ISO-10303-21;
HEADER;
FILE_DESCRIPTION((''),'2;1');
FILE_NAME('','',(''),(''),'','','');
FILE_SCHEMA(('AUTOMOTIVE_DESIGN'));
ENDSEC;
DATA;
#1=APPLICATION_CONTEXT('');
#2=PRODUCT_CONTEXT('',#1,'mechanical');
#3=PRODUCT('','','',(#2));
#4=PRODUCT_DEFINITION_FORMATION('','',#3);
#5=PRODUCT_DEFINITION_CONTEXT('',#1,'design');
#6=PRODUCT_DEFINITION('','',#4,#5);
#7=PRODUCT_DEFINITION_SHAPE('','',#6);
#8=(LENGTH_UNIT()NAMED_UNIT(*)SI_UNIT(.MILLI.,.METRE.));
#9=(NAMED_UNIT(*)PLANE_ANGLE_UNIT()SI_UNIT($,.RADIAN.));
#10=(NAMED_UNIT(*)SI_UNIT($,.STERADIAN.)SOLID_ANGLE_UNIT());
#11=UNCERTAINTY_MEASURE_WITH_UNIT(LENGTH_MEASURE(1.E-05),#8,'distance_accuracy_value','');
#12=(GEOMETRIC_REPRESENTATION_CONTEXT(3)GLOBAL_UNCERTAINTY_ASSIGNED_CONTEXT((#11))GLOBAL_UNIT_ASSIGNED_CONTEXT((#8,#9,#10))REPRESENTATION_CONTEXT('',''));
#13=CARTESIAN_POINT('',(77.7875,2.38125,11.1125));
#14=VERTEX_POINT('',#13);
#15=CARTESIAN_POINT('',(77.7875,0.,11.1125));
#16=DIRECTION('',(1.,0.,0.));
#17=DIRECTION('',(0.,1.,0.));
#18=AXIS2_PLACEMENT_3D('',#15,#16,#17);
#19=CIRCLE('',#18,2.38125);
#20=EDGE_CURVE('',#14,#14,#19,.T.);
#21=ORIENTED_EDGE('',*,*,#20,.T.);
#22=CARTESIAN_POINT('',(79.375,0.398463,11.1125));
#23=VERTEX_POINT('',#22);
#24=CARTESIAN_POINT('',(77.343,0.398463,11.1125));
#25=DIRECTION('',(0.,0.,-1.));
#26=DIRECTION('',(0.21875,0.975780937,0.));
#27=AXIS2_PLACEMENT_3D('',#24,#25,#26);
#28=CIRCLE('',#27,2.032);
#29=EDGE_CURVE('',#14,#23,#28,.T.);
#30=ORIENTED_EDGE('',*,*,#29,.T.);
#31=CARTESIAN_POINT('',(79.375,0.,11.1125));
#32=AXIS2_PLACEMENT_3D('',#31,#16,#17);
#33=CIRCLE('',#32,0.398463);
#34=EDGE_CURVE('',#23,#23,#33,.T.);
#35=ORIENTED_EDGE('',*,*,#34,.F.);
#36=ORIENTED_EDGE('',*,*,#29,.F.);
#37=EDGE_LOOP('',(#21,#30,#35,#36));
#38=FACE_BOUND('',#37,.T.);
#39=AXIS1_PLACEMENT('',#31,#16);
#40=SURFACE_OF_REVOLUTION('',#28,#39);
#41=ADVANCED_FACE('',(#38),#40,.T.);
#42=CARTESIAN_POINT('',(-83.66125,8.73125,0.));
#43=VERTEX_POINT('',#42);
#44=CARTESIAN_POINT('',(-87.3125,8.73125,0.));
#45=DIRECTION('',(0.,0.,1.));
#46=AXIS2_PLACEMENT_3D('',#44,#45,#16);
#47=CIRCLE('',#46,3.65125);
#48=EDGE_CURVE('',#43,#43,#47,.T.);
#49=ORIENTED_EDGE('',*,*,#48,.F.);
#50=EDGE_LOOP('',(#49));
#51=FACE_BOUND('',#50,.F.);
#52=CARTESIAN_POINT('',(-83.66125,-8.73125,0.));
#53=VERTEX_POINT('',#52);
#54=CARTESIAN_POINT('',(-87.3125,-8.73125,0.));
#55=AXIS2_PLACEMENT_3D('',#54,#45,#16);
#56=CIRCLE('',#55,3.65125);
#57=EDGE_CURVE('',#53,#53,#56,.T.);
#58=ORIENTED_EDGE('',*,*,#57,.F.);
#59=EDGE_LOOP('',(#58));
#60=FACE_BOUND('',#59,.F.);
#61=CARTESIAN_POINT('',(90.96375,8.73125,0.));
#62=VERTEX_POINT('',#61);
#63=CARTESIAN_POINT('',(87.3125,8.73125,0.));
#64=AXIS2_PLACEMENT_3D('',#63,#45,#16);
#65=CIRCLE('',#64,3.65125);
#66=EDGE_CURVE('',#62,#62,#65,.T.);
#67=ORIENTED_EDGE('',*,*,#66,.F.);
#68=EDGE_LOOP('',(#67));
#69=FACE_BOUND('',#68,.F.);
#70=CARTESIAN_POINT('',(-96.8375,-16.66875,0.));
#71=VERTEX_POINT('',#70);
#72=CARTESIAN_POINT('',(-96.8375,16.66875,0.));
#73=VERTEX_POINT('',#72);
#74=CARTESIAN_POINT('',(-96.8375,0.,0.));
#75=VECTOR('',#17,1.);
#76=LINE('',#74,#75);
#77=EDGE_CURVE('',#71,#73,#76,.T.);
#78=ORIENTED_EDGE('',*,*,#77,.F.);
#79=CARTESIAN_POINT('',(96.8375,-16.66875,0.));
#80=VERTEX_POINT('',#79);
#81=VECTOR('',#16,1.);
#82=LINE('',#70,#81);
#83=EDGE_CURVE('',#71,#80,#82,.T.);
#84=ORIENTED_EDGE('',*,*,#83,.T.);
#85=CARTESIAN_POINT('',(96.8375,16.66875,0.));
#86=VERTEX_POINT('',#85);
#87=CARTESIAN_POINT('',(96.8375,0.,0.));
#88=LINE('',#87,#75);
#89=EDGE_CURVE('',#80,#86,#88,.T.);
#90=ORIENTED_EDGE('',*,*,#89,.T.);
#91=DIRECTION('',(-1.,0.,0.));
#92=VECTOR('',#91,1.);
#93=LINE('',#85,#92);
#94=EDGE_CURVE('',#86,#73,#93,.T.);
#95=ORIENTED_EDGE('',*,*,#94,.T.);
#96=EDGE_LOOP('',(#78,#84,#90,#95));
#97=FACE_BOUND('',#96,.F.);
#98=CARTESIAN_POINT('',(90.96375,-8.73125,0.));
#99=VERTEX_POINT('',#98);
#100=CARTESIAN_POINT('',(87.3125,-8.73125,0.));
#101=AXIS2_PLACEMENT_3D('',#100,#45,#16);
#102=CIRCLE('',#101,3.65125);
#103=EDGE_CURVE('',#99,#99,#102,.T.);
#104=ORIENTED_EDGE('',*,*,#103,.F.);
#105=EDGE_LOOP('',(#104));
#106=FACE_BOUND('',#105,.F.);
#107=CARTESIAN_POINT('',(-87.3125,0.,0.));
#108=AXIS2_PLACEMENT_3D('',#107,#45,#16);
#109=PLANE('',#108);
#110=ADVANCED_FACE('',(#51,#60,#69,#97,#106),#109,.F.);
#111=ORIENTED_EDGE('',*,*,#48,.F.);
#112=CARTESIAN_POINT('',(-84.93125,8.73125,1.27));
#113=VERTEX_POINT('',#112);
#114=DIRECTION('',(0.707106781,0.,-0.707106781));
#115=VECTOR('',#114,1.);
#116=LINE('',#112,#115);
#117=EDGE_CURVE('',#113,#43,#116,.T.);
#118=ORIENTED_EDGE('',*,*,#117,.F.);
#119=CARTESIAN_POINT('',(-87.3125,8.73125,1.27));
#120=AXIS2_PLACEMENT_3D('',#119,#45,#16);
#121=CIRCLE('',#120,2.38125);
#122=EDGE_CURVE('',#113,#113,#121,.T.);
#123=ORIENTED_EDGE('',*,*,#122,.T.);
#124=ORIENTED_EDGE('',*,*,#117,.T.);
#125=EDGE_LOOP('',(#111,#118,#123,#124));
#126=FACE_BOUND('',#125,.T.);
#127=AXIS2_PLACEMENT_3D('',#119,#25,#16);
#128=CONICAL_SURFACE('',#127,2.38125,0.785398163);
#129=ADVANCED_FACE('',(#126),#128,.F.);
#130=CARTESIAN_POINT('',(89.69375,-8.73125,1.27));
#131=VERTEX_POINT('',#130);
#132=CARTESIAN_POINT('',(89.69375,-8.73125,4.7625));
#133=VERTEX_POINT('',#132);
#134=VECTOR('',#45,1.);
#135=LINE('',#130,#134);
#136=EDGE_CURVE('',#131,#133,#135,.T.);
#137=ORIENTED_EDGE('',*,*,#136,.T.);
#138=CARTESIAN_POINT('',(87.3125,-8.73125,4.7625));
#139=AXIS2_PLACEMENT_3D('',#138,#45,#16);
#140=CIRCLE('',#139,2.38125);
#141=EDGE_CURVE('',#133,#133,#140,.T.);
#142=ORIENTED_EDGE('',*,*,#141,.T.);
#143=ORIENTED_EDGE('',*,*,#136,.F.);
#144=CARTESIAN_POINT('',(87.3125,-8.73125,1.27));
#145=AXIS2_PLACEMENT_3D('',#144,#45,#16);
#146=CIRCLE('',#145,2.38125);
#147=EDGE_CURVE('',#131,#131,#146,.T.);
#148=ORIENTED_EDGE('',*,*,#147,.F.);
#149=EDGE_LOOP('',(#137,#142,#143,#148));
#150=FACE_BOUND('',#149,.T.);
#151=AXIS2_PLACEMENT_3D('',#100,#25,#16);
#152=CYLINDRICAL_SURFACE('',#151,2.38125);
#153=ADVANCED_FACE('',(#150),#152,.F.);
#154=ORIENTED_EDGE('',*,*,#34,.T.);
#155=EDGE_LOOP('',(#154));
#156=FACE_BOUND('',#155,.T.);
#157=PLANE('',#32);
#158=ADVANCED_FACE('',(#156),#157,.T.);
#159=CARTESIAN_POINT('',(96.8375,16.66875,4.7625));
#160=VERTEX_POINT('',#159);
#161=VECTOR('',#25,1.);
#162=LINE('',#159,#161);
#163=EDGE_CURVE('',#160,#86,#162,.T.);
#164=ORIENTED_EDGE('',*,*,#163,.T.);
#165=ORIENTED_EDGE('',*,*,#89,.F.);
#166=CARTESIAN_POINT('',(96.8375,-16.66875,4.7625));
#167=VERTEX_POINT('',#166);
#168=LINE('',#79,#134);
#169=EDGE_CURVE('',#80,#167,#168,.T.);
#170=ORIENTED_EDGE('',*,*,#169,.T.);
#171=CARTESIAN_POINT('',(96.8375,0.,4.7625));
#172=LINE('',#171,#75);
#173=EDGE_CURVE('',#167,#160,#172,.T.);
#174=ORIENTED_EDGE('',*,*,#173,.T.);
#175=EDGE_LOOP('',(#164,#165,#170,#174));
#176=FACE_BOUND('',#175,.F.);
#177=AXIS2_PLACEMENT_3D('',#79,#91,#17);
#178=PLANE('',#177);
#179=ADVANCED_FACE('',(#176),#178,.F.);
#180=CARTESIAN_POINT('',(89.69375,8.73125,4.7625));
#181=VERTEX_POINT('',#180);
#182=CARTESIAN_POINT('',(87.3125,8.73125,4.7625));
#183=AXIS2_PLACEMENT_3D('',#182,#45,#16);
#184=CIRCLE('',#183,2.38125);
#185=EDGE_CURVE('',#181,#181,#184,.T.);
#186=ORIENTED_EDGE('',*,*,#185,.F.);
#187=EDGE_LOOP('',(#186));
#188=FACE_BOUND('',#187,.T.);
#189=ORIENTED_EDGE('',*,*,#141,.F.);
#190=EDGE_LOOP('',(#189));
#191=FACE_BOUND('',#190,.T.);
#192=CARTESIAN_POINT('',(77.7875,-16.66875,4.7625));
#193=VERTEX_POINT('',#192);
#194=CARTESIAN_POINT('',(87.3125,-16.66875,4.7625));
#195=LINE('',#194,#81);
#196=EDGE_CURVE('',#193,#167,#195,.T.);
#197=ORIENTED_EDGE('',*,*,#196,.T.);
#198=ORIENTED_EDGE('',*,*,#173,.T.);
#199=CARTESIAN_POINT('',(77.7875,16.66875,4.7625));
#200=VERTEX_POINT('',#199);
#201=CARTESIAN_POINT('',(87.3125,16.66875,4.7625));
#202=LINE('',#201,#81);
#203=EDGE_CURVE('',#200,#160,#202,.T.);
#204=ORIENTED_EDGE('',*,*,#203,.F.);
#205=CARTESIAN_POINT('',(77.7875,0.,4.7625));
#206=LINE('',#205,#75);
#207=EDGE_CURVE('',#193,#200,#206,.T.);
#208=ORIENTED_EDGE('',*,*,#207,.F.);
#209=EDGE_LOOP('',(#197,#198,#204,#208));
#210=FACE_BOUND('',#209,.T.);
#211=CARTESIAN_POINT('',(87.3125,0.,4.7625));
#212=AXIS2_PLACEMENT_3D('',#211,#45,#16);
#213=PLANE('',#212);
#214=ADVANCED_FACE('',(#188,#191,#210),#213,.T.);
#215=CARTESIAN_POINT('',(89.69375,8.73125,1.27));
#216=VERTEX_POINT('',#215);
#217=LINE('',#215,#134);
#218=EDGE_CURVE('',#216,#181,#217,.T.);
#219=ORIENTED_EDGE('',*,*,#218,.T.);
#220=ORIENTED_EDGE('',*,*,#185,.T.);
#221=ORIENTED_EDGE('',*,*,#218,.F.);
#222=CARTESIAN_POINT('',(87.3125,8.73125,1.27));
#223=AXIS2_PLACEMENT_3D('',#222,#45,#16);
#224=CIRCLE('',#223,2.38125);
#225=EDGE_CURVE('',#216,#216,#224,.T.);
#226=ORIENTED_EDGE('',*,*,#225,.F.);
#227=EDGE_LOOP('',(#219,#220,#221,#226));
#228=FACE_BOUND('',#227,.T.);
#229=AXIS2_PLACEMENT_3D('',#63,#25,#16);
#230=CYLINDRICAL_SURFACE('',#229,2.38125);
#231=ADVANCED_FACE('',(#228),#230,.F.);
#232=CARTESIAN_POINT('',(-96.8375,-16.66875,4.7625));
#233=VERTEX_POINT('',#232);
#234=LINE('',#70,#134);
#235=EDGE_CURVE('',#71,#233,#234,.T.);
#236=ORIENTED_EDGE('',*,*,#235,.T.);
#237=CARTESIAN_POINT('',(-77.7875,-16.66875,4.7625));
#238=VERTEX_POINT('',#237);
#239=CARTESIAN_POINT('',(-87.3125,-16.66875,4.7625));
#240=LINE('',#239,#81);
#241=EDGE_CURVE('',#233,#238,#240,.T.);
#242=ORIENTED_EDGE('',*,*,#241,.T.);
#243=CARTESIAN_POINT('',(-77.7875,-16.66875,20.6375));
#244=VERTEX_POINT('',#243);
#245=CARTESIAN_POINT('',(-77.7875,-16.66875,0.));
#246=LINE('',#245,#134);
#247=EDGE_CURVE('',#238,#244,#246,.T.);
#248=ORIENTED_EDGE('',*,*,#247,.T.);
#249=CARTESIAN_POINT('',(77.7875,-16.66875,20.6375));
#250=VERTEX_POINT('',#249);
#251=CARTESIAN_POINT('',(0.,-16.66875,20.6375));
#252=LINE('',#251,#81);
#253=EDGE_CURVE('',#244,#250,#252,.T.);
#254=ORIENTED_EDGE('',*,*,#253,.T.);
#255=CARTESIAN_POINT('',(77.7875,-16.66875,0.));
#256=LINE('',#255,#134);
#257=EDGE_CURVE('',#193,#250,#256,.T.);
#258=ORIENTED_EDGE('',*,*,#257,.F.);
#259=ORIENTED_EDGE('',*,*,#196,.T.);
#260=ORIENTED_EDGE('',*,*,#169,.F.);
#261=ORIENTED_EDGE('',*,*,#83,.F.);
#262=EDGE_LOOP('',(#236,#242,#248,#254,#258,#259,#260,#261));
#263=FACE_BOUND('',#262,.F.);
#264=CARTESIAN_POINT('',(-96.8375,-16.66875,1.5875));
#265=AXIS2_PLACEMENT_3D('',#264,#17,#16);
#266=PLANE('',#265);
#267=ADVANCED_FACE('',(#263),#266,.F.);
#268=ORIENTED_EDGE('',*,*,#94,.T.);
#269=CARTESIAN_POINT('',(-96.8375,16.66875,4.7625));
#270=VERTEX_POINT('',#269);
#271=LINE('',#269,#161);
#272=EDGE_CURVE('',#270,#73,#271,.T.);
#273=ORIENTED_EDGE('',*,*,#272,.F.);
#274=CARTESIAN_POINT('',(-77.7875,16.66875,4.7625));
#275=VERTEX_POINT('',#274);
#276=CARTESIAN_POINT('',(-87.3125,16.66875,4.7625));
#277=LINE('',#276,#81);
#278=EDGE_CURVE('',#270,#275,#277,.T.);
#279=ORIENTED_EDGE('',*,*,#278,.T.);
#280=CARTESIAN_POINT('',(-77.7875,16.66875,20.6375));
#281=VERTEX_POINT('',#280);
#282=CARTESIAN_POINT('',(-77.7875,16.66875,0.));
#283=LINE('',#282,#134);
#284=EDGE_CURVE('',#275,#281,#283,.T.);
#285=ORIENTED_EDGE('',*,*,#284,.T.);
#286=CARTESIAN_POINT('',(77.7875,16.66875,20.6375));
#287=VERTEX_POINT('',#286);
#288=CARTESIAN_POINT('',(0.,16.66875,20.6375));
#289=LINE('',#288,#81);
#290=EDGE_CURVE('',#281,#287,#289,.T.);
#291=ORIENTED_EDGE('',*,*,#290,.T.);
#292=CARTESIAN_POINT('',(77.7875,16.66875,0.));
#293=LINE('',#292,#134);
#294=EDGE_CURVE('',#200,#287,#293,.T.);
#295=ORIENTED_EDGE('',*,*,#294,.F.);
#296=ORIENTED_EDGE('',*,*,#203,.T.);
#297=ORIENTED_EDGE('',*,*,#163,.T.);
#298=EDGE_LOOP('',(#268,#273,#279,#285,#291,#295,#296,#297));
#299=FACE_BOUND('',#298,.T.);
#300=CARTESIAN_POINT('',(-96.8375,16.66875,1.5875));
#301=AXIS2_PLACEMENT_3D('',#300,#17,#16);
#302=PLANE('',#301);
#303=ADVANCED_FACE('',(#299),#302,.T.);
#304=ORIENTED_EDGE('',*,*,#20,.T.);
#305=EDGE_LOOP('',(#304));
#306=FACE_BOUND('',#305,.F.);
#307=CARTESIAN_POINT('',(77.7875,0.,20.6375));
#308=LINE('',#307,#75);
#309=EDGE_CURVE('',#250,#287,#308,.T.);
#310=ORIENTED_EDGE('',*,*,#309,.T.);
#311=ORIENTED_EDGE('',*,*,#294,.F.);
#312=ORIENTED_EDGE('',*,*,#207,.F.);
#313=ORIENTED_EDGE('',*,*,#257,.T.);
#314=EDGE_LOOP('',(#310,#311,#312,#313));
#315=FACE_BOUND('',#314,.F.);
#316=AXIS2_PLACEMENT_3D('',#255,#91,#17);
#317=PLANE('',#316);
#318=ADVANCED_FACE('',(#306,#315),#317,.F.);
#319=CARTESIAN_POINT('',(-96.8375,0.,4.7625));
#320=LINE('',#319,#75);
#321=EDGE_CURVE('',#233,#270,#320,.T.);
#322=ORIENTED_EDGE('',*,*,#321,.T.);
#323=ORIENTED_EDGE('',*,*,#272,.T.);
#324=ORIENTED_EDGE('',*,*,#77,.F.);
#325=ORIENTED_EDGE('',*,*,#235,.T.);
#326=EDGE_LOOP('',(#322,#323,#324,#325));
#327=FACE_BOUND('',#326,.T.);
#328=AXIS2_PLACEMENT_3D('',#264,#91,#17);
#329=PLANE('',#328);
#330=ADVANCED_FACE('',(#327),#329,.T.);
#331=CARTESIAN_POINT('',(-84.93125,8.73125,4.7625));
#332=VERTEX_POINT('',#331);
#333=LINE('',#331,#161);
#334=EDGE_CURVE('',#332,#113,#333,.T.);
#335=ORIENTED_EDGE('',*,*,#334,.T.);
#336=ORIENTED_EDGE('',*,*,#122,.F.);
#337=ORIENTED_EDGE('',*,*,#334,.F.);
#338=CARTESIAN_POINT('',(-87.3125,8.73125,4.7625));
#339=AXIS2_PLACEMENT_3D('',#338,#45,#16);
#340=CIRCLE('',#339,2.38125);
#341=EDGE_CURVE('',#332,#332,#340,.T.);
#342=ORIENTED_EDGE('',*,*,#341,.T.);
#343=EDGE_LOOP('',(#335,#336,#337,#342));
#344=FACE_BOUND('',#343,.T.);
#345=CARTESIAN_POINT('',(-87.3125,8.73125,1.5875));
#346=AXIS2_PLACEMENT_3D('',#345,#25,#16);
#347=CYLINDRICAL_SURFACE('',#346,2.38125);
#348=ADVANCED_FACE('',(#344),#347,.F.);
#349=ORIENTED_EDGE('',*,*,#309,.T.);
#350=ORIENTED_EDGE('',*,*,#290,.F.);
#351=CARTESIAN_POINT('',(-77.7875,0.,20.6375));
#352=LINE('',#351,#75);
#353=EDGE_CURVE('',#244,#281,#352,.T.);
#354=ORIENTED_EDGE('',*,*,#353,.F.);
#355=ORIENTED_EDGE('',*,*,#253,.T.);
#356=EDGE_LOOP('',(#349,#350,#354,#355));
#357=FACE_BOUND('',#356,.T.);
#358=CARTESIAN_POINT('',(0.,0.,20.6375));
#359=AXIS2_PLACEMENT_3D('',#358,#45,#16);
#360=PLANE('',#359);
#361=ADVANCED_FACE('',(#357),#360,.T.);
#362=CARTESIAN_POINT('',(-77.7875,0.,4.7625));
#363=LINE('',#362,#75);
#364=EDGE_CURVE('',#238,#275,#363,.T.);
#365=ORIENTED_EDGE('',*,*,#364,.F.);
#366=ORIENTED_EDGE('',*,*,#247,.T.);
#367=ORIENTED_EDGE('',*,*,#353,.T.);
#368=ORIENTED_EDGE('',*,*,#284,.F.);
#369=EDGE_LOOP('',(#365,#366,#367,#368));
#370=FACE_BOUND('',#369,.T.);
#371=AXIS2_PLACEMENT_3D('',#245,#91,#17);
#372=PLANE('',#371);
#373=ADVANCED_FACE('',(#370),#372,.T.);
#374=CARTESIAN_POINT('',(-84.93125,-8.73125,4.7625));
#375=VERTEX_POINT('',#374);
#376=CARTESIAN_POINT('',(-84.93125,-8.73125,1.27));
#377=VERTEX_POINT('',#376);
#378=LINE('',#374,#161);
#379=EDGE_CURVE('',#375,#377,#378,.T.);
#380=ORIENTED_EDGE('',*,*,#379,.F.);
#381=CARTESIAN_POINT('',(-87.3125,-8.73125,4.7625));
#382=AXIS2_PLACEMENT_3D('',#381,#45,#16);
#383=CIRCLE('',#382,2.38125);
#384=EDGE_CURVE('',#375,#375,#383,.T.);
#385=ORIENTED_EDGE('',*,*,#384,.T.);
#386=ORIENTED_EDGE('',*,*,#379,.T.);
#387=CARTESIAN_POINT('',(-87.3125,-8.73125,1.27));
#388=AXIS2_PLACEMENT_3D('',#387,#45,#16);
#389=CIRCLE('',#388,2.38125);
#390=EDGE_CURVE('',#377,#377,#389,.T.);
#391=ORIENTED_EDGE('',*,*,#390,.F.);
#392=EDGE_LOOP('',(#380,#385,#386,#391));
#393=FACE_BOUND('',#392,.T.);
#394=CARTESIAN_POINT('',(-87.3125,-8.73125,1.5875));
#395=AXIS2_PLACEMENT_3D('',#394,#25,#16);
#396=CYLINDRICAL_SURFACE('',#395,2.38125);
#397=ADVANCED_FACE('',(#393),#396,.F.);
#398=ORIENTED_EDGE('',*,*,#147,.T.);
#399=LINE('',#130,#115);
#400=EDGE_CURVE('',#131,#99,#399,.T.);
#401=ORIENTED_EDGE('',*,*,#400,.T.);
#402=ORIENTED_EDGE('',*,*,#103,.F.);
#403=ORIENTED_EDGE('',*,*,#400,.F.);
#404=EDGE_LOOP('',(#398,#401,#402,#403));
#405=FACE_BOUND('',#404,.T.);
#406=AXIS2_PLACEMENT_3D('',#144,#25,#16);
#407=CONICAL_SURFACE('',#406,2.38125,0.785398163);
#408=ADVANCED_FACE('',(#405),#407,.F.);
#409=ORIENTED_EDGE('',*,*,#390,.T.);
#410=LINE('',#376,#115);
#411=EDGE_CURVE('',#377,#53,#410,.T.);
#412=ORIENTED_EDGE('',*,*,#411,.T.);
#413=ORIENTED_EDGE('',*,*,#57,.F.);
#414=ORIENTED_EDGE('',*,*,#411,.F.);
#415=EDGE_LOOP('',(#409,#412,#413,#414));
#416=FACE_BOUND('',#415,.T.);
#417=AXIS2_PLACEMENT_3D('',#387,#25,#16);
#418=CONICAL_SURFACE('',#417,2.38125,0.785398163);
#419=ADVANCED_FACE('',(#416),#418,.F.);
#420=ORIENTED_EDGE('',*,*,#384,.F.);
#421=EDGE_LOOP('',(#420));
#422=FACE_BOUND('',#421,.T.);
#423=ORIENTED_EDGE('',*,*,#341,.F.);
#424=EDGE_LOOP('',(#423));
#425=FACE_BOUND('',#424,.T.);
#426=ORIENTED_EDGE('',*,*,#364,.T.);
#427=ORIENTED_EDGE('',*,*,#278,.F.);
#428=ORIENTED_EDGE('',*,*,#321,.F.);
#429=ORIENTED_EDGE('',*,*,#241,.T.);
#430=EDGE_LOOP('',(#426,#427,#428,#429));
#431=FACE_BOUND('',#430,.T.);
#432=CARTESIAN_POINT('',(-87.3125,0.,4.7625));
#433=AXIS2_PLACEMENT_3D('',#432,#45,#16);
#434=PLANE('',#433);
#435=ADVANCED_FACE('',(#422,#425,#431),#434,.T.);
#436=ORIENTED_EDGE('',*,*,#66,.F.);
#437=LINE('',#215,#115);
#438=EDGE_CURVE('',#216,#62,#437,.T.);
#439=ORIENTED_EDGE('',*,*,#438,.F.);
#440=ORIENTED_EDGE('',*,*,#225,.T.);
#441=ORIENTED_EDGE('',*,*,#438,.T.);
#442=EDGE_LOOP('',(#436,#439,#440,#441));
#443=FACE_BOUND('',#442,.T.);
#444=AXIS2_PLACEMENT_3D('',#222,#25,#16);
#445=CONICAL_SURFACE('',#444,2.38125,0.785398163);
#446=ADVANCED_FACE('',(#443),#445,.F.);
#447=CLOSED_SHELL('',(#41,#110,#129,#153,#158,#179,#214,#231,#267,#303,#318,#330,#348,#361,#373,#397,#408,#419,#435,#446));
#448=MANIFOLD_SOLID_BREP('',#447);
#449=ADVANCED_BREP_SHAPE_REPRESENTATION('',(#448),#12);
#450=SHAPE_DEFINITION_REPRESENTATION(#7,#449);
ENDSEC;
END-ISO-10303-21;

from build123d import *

# Parameters (mm, degrees)
F0_W     = 155.575
F0_H     = 33.3375
F1_DEPTH = 20.6375
F0_W_2   = 19.05
F0_R     = 2.38125
F2_DEPTH = 1.5875
F3_SIZE  = 1.27
F4_R     = 2.38125
F5_DEPTH = 1.5875
F7_DEPTH = 3.175


# Not quite as in the source:
# - a fillet or chamfer that OpenCascade refuses, or shapes differently, is made with other operations: its cross-section is extruded or revolved along the edge and cut away or added


with BuildPart() as f1:
    # F0 (on Top) → F1 (new body)
    with BuildSketch(Plane.XY):
        Rectangle(F0_W, F0_H)
    extrude(amount=F1_DEPTH)

    # F0 (on Top) → F2 (join)
    with BuildSketch(Plane.XY):
        with Locations((-87.3125, 0)):
            Rectangle(F0_W_2, F0_H)
        with Locations((-87.3125, -8.73125)):
            Circle(F0_R, mode=Mode.SUBTRACT)
        with Locations((-87.3125, 8.73125)):
            Circle(F0_R, mode=Mode.SUBTRACT)
        with Locations((87.3125, 0)):
            Rectangle(F0_W_2, F0_H)
        with Locations((87.3125, -8.73125)):
            Circle(F0_R, mode=Mode.SUBTRACT)
        with Locations((87.3125, 8.73125)):
            Circle(F0_R, mode=Mode.SUBTRACT)
    extrude(amount=F2_DEPTH)

    # F3
    f3_edges = [f1.edges().sort_by_distance(p)[0] for p in [
        (-89.69375, -8.73125, 0),
        (-89.69375, 8.73125, 0),
        (84.93125, -8.73125, 0),
        (84.93125, 8.73125, 0),
    ]]
    chamfer(f3_edges, length=F3_SIZE)

    # F4 (on face) → F5 (join)
    with BuildSketch(Plane.YZ.offset(77.7875)):
        with Locations((0, 11.1125)):
            Circle(F4_R)
    extrude(amount=F5_DEPTH)

    # F6: fillet of radius 2.032 on 1 edges, made by hand

    # F6_s1 → F6_t2 (revolve, cut)
    with BuildSketch(Plane.XY.offset(11.1125)):
        with BuildLine():
            ThreePointArc((77.7875, 2.38125), (78.9292294916, 1.6684631355), (79.375, 0.3984631355))
            Line((79.375, 0.3984631355), (79.375, 2.38125))
            Line((79.375, 2.38125), (77.7875, 2.38125))
        make_face()
    revolve(axis=Axis((79.375, 0, 11.1125), (1, 0, 0)), mode=Mode.SUBTRACT)

    # F7 (add): faces of the model
    f7_faces = [f1.faces().sort_by_distance(p)[0] for p in [
        (-87.3125, 0, 1.5875),
        (87.3125, 0, 1.5875),
    ]]
    extrude(f7_faces, amount=F7_DEPTH)


solid = f1.part
